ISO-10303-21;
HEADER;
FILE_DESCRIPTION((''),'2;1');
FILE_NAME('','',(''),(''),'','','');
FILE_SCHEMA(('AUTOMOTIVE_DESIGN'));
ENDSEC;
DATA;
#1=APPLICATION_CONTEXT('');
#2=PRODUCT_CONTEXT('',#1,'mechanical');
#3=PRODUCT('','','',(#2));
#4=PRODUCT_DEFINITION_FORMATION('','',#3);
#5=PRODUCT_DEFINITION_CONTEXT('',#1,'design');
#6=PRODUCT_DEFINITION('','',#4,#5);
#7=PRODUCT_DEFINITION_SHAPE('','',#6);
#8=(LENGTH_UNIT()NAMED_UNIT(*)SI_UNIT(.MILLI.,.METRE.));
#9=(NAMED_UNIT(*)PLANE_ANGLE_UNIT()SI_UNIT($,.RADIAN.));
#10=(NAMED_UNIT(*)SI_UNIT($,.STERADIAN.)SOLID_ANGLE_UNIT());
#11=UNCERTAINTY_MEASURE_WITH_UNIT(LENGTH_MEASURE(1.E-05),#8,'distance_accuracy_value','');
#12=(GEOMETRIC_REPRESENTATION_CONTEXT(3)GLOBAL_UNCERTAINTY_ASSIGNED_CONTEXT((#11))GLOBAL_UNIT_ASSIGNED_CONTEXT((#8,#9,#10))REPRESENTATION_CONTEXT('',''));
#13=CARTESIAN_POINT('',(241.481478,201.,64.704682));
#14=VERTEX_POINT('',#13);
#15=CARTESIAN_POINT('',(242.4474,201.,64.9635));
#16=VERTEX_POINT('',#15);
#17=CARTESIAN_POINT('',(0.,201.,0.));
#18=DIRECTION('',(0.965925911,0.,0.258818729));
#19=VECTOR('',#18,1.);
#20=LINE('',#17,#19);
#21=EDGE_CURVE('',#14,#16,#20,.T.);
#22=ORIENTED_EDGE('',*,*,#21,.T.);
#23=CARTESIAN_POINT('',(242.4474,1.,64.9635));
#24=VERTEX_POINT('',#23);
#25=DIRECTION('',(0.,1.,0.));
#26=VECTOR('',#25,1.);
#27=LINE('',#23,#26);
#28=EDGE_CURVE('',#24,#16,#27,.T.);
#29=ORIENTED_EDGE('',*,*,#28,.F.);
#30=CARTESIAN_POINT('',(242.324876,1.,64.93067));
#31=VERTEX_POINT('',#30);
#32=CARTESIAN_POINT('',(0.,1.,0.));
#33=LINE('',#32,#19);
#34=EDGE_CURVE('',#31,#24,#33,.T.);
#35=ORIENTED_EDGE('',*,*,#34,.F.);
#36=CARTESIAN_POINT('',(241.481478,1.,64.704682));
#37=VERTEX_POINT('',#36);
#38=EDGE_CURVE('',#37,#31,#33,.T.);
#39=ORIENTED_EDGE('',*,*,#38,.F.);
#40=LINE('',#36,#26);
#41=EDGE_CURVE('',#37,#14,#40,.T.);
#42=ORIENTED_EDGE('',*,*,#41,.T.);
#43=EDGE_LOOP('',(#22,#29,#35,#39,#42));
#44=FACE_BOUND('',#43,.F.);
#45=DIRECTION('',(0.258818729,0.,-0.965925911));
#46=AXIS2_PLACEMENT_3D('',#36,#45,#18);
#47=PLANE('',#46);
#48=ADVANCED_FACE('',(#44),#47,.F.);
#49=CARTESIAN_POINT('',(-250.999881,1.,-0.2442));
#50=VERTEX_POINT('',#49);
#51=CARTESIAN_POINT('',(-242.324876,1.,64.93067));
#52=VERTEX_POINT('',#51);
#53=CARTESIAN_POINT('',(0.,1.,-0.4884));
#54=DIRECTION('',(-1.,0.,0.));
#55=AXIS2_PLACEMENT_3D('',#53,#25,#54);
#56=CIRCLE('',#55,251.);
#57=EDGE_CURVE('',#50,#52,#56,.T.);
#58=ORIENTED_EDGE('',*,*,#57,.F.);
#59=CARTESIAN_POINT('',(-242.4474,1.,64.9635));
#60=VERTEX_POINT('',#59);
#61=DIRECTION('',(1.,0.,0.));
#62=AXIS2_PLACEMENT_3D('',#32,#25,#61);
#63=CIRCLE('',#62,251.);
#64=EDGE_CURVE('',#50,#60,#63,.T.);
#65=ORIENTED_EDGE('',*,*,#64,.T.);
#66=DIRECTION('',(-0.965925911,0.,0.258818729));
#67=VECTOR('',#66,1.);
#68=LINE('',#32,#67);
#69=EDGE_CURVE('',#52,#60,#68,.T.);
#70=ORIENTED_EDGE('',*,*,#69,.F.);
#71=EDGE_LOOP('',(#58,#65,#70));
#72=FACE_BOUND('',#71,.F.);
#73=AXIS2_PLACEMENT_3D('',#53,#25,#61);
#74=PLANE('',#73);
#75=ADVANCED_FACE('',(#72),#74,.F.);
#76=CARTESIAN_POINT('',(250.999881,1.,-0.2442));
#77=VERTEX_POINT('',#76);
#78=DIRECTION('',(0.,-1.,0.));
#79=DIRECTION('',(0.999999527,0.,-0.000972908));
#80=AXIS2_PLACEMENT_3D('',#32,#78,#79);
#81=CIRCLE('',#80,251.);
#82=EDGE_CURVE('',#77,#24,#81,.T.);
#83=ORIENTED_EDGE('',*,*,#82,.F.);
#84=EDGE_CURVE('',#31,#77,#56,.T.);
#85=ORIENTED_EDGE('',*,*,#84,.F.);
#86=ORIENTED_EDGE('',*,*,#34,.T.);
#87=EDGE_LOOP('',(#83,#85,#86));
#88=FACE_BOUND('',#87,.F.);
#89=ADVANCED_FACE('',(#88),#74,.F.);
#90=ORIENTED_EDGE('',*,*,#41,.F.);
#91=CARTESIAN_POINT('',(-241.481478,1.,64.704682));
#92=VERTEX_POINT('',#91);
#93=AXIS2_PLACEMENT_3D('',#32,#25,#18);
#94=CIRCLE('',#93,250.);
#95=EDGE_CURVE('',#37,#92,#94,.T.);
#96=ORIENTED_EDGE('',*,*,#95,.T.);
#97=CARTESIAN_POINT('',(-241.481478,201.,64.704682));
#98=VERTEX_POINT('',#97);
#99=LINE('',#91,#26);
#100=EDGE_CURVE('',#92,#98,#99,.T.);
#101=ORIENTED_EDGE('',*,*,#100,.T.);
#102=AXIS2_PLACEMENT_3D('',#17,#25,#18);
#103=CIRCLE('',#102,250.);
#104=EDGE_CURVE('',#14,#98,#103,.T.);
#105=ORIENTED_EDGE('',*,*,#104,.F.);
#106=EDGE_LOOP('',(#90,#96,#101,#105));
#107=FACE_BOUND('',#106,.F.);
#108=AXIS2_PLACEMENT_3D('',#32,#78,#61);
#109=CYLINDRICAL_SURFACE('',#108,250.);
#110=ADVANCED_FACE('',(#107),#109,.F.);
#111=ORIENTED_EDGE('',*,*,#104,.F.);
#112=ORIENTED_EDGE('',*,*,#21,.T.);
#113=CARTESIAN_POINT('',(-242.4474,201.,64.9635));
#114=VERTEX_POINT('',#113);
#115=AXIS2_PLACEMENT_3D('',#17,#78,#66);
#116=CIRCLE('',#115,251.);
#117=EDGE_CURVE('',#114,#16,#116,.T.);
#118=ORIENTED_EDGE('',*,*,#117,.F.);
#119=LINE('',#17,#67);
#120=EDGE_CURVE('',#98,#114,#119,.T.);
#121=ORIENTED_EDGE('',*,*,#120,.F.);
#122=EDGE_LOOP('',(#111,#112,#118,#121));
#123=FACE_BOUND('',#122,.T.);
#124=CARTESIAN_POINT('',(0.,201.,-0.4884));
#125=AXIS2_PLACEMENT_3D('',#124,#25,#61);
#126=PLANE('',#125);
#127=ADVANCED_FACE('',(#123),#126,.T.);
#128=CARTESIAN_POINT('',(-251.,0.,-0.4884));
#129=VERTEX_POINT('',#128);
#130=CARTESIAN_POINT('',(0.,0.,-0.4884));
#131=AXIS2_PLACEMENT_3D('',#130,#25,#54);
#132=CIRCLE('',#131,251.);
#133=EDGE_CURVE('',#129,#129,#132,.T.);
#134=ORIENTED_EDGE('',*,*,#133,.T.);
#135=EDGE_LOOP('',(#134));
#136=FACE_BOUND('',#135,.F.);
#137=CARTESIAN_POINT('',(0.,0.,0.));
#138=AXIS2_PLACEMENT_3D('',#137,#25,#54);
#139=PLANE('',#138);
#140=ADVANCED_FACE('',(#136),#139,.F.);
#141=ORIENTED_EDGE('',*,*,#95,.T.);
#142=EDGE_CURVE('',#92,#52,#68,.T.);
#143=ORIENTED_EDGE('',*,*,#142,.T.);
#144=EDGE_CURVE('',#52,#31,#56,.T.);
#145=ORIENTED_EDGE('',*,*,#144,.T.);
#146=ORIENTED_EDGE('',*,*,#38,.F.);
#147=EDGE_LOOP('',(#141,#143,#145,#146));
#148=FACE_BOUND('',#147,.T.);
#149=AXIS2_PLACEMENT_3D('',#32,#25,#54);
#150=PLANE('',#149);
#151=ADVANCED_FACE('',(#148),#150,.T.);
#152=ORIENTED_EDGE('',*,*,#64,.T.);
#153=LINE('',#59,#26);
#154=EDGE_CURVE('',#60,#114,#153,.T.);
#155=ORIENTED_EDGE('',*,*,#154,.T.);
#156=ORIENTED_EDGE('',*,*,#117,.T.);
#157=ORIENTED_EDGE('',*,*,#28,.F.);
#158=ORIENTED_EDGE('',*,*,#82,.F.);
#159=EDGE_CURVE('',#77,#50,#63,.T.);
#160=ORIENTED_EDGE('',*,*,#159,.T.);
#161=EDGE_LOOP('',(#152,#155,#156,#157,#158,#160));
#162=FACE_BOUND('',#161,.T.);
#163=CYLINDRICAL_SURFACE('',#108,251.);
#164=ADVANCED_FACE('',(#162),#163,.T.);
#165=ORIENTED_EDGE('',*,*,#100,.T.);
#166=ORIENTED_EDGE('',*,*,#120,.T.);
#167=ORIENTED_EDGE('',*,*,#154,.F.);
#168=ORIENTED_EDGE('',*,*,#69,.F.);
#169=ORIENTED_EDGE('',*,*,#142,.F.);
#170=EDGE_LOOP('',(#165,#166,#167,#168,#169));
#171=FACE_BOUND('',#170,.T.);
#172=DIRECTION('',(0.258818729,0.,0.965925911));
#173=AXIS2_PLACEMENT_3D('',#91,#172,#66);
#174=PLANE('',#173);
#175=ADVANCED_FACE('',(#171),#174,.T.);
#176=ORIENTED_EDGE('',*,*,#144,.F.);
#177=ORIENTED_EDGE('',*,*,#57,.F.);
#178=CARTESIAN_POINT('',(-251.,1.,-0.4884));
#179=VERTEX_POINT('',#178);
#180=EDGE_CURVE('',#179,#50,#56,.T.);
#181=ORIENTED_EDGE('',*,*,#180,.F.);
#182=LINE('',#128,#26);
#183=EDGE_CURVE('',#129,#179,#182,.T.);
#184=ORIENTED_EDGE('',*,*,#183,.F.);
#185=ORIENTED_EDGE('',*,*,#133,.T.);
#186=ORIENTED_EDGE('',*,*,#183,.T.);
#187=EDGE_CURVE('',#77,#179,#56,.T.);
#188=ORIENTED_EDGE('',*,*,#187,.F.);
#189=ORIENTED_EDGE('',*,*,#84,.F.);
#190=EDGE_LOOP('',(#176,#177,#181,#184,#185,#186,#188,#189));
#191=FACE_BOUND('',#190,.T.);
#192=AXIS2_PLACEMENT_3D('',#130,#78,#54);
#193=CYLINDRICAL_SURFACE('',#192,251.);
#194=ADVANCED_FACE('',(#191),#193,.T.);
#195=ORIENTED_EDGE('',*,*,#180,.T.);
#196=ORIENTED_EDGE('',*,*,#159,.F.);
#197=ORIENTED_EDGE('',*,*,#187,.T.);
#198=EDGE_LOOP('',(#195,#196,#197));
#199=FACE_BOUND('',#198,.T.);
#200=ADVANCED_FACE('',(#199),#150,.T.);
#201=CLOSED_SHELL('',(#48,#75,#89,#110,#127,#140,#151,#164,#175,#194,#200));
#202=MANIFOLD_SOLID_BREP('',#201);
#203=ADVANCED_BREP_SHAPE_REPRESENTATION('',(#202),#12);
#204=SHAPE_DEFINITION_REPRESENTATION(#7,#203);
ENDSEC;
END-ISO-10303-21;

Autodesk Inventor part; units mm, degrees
ref_plane "YZ Plane" through (0, 0, 0) normal (1, 0, 0) x (0, 1, 0)
ref_plane "XZ Plane" through (0, 0, 0) normal (0, 1, 0) x (-1, 0, 0)
ref_plane "XY Plane" through (0, 0, 0) normal (0, 0, 1) x (1, 0, 0)
sketch "スケッチ1" plane through (0, 0, 0) normal (0, 1, 0) x (-1, 0, 0)
  circle A0 centre (0, -0.4884) radius 251
  point P0 (0, 0)
  dimension "d0" = 502
extrude "押し出し1" add sketch "スケッチ1" along normal blind 1
sketch "スケッチ2" plane through (0, 1, -0.4884) normal (0, 1, 0) x (1, 0, 0)
  circle A0 centre (0, -0.4884) radius 250
  line L0 (0, -0.4884) -> (-242.4474, -65.4519)
  line L1 (0, -0.4884) -> (251, -0.4884) construction
  line L2 (0, -0.4884) -> (242.4474, -65.4519)
  line L3 (0, -0.4884) -> (251, -0.4884) construction
  line L4 (242.4474, -65.4519) -> (-242.4474, -65.4519)
  circle A1 centre (0, -0.4884) radius 251
  point P0 (242.4474, -65.4519)
  point P1 (-242.4474, -65.4519)
  point P2 (-241.4815, -65.1931)
  point P3 (241.4815, -65.1931)
  dimension "d3" = 500
  dimension "d4" = 251
  dimension "d5" = 165
  dimension "d6" = 251
  dimension "d7" = 15
  dimension "d8" = 502
extrude "押し出し2" add sketch "スケッチ2" along normal blind 200 contours A0 L0 A1 L2
properties part number "stage" material "ステンレス鋼"
